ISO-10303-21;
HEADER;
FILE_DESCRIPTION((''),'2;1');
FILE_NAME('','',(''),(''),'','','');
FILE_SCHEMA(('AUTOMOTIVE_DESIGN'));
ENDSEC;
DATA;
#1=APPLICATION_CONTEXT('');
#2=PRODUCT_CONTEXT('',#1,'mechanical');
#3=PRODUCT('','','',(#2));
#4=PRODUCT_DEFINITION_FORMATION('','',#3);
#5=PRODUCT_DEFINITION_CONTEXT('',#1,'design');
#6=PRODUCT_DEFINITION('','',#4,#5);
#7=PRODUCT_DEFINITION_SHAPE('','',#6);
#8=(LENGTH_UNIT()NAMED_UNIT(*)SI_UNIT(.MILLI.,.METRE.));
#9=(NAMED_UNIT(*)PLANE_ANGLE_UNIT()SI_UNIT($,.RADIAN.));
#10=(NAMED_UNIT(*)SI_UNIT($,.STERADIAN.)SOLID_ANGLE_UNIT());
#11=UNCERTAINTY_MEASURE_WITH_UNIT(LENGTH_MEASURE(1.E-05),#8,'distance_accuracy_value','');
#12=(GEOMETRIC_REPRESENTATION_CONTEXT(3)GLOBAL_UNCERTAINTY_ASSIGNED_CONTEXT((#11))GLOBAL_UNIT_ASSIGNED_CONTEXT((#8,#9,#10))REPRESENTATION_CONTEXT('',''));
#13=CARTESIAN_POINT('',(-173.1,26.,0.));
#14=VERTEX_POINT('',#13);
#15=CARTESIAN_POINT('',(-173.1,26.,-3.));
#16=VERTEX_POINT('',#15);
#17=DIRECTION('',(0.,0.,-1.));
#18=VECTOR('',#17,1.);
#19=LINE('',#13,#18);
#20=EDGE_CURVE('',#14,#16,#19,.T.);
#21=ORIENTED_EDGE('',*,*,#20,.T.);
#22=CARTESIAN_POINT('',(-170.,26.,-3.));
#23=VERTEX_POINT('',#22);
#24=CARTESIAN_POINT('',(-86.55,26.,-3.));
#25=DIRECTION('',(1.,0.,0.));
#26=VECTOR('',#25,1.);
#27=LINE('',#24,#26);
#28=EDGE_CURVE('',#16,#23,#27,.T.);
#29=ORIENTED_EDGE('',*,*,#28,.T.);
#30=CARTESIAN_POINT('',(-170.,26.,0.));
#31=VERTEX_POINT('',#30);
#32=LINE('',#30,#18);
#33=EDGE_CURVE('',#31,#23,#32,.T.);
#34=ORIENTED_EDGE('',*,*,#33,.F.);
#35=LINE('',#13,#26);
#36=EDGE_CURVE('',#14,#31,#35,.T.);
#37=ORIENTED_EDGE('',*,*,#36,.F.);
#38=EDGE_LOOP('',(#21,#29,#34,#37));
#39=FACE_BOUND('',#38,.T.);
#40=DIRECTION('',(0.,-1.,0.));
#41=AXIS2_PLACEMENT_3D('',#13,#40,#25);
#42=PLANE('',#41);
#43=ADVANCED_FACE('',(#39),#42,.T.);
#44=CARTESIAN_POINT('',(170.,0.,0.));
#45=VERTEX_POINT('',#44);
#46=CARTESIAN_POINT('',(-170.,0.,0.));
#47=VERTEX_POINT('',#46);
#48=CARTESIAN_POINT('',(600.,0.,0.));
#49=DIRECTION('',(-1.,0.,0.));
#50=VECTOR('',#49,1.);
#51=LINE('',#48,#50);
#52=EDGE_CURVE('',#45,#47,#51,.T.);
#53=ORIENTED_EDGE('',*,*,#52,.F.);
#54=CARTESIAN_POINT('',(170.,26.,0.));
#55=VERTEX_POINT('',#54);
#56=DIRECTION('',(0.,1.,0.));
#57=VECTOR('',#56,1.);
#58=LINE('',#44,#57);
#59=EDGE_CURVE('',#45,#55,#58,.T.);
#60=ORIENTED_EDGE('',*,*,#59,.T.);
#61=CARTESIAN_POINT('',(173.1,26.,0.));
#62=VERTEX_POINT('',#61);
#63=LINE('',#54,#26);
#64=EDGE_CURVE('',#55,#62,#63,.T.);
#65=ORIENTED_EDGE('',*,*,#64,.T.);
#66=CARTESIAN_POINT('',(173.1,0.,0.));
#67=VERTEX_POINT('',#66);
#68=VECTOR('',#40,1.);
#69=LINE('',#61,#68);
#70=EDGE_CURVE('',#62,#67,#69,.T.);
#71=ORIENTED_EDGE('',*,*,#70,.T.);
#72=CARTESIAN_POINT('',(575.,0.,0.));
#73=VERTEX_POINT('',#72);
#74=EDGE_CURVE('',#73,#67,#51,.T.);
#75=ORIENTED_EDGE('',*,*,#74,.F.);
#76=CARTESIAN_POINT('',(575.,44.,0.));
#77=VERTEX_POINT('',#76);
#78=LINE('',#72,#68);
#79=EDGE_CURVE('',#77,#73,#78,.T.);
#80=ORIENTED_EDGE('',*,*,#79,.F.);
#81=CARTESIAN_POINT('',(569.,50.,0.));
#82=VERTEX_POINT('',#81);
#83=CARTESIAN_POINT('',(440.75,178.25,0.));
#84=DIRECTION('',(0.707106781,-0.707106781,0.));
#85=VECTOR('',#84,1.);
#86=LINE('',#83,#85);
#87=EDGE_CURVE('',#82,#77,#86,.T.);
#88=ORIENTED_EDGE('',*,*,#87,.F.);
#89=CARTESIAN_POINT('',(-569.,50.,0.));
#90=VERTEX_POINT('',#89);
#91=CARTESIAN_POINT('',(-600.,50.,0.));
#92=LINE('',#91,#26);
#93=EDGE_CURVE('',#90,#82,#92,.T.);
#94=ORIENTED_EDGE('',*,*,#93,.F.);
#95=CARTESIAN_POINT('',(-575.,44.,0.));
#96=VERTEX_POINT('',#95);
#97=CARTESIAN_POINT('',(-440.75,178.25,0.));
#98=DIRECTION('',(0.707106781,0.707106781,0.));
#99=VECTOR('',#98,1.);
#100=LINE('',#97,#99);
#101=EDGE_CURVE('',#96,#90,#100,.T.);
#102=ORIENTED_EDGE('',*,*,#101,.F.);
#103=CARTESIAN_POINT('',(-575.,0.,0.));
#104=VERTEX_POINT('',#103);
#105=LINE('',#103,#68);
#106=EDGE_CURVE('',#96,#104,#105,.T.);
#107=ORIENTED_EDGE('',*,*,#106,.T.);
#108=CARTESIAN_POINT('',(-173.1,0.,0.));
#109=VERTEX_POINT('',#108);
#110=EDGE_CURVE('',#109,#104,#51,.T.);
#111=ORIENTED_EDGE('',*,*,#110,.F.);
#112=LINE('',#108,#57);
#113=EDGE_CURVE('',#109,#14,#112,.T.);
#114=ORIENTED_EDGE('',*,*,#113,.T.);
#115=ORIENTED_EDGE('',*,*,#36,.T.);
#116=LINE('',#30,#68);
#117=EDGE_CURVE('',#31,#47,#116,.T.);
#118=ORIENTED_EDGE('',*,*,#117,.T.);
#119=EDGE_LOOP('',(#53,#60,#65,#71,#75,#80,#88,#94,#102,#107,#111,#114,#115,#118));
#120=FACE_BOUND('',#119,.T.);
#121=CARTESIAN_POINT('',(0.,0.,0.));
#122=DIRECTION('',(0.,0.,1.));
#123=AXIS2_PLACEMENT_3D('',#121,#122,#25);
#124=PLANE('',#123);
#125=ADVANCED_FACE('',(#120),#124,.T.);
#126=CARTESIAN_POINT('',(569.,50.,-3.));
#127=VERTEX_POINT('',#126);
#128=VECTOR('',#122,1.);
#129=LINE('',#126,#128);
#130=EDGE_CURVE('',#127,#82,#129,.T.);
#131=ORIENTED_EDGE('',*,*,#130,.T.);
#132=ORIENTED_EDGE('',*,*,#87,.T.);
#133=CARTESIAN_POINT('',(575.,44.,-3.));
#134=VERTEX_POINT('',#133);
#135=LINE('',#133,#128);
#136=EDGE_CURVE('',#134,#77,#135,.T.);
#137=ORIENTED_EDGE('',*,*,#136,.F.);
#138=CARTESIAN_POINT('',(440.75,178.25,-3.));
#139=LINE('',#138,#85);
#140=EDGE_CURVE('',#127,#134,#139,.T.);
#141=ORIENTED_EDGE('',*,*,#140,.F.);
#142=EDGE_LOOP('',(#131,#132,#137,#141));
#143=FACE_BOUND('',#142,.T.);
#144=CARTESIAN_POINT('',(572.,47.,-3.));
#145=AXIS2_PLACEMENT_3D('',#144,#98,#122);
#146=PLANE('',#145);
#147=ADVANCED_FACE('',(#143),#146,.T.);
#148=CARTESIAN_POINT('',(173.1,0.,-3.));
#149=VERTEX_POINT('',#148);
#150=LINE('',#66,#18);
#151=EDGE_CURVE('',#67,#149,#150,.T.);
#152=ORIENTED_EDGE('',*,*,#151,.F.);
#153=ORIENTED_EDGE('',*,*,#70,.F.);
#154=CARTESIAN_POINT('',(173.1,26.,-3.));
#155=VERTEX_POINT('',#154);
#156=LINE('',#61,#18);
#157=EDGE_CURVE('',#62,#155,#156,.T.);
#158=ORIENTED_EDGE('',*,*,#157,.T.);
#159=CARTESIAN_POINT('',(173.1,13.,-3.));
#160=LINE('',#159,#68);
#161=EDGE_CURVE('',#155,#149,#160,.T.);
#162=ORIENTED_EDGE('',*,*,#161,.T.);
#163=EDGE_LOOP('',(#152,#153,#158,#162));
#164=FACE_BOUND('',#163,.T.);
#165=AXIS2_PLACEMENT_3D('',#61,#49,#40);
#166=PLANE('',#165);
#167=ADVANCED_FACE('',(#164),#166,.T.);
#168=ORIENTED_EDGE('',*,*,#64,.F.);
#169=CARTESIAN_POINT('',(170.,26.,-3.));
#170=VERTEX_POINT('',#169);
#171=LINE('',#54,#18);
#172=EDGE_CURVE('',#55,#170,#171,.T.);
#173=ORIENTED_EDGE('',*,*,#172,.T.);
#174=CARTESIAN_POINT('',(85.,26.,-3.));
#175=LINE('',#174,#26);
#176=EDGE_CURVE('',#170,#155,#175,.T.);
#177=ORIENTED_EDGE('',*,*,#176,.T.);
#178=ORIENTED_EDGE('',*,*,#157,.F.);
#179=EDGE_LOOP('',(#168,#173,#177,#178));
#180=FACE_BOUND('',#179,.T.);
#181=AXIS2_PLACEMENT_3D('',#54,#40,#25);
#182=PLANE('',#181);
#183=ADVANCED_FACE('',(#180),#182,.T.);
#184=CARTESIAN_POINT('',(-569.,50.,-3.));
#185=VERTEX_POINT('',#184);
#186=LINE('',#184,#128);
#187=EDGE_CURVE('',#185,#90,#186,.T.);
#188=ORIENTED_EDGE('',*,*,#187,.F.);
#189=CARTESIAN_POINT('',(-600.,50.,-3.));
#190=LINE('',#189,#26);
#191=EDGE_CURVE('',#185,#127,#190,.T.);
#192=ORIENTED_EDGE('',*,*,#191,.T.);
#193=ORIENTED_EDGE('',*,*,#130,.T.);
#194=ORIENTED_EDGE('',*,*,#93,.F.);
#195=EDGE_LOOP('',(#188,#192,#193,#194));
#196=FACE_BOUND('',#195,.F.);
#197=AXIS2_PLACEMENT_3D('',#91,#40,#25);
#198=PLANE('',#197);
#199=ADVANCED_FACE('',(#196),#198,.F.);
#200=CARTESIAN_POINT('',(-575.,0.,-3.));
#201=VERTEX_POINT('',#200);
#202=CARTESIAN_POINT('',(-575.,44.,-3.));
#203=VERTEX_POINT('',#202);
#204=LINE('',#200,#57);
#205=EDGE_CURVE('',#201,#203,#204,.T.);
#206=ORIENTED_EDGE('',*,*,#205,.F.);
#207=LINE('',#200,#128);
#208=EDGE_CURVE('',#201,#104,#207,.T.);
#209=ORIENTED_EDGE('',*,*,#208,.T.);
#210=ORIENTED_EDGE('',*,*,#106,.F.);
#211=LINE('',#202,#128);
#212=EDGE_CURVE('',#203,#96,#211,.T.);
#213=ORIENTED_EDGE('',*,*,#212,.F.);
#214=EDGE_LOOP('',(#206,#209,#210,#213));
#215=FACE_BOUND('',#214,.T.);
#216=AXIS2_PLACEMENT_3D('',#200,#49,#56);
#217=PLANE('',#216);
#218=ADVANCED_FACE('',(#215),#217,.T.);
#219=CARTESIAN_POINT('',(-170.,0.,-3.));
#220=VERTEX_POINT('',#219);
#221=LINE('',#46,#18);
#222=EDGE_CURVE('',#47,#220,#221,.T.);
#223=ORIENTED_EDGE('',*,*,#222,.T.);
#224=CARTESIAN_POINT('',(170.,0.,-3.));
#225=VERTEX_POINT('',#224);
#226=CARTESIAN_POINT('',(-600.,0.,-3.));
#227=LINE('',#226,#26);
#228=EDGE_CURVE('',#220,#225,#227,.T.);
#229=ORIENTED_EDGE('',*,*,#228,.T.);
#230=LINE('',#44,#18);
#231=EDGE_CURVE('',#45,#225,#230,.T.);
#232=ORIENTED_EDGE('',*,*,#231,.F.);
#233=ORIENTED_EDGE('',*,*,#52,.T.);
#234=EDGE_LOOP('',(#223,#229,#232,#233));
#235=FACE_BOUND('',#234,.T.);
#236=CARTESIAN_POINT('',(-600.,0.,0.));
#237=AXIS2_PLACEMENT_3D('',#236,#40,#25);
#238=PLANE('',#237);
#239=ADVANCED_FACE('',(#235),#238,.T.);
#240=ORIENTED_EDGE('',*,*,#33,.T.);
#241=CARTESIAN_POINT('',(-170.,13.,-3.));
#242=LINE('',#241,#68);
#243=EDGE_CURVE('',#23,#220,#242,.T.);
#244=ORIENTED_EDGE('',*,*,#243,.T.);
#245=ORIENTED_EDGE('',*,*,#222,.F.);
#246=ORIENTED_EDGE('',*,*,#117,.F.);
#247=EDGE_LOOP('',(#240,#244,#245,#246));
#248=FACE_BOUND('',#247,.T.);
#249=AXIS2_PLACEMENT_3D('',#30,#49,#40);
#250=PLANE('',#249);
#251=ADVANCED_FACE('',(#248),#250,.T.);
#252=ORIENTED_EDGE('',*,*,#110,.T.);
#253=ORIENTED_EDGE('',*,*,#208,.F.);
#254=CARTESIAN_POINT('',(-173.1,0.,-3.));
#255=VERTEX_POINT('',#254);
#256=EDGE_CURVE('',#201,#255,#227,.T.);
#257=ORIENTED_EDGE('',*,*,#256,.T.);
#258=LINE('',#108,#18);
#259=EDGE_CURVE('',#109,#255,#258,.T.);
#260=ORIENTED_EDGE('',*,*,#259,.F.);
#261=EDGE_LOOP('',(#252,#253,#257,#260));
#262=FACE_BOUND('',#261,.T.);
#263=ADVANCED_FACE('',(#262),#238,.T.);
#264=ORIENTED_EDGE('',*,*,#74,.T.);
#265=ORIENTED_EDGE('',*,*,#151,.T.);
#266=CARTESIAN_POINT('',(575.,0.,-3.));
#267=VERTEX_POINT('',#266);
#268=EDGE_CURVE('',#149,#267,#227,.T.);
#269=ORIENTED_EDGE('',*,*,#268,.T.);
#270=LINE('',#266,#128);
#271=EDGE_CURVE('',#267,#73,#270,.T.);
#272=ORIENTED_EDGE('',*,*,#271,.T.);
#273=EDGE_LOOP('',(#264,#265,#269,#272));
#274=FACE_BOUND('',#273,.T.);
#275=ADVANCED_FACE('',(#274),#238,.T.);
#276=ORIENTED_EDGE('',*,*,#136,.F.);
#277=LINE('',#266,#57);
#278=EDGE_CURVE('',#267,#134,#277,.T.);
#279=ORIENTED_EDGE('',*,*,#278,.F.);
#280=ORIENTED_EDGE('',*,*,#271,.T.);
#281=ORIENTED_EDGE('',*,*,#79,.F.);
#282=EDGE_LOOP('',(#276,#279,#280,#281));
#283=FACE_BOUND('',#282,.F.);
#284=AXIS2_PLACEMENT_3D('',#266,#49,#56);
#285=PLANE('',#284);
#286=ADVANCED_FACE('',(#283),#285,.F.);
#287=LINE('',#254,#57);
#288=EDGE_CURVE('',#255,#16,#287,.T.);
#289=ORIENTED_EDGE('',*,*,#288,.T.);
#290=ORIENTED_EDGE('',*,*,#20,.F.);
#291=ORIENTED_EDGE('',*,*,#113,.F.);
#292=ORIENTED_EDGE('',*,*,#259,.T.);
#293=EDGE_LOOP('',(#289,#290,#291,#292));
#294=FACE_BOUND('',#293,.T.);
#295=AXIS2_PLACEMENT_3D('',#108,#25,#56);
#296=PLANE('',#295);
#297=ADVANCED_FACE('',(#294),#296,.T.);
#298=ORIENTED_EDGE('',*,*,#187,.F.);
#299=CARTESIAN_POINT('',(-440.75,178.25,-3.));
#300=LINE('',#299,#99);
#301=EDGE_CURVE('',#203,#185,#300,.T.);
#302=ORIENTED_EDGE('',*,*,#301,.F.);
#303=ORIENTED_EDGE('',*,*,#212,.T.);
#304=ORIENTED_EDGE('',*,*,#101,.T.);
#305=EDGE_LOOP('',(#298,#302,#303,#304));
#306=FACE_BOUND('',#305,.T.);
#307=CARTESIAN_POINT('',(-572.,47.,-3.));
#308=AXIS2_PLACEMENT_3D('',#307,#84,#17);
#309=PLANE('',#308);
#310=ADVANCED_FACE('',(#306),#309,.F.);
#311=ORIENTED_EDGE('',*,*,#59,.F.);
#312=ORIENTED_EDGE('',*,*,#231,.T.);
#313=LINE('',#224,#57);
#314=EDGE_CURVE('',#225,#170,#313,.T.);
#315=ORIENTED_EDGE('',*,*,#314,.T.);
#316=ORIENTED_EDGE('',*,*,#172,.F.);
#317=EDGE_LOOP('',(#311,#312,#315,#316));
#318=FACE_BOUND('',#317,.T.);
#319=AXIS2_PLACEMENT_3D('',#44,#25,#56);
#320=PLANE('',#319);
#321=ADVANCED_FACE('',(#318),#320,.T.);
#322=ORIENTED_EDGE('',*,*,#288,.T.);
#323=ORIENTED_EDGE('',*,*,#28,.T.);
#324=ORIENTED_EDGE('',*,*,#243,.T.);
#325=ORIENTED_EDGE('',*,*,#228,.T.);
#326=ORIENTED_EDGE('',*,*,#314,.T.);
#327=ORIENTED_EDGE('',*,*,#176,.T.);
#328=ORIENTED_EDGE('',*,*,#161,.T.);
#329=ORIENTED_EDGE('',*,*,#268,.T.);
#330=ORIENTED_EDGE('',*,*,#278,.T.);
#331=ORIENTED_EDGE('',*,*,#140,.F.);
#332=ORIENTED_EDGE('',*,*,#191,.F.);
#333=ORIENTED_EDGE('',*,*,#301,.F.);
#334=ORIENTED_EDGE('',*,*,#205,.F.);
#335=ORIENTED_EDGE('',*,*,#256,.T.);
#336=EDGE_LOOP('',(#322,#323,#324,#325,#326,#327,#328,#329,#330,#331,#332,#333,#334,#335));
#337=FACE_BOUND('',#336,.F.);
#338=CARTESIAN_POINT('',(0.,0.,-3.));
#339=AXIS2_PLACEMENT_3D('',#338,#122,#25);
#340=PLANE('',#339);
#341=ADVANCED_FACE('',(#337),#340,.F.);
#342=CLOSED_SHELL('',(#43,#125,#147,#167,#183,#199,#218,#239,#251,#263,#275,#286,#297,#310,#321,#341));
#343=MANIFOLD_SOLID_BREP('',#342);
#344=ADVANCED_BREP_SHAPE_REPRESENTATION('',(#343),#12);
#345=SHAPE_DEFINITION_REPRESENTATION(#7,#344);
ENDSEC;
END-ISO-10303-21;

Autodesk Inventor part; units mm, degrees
ref_plane "YZ Plane" through (0, 0, 0) normal (1, 0, 0) x (0, 1, 0)
ref_plane "XZ Plane" through (0, 0, 0) normal (0, 1, 0) x (-1, 0, 0)
ref_plane "XY Plane" through (0, 0, 0) normal (0, 0, 1) x (1, 0, 0)
sketch "Sketch1" plane through (0, 0, 0) normal (0, 0, 1) x (1, 0, 0)
  line L0 (-600, 0) -> (600, 0)
  line L1 (-600, 0) -> (-600, 50)
  line L2 (-600, 50) -> (600, 50)
  line L3 (600, 50) -> (600, 0)
  circle A0 centre (-600, 0) radius 25
  circle A1 centre (600, 0) radius 25
  line L4 (600, 0) -> (644.2345, 16.1001)
  line L5 (644.2345, 16.1001) -> (635, 50)
  line L6 (635, 50) -> (600, 50)
  point P0 (0, 0)
  point P1 (0, 0)
  point P2 (-600, 25)
  point P3 (-575, 0)
  point P4 (575, 0)
  point P5 (600, 25)
  point P6 (623.4923, 8.5505)
  dimension "d18" = 50
  dimension "d19" = 1200
  dimension "d25" = 50
  dimension "d26" = 50
  dimension "d39" = 70
  dimension "d40" = 35
extrude "Plate2" add sketch "Sketch1" against normal blind 3 contours L1 A0 L0 | A0 L1 L2 L3 A1 L0 | A1 L3 L0 picked at (-598.1457, 16.4577)
sketch "Sketch3" plane through (0, 0, 0) normal (0, 0, 1) x (1, 0, 0)
  line L0 (-171.55, 0) -> (-171.55, 50) construction
  line L1 (600, 50) -> (-600, 50) construction
  line L2 (-600, 50) -> (-600, 0) projected
  line L3 (-173.1, 26) -> (-170, 26)
  line L4 (-170, 26) -> (-170, 0)
  line L5 (-170, 0) -> (-173.1, 0)
  line L6 (-173.1, 0) -> (-173.1, 26)
  line L7 (-600, 0) -> (600, 0) projected
  line L8 (171.55, 50) -> (171.55, 0) construction
  line L9 (170, 26) -> (173.1, 26)
  line L10 (173.1, 26) -> (173.1, 0)
  line L11 (173.1, 0) -> (170, 0)
  line L12 (170, 0) -> (170, 26)
  line L13 (0, 0) -> (0, 50) construction
  point P0 (0, 0)
  point P1 (170, 0)
  point P2 (173.1, 0)
  dimension "d28" = 3.1
  dimension "d29" = 26
  dimension "d52" = 340
extrude "Extrusion2" cut sketch "Sketch3" against normal through all
sketch "Sketch4" plane through (0, 0, -3) normal (0, 0, -1) x (-1, 0, 0)
  line L0 (170, 0) -> (170, 26) projected
  line L1 (170, 26) -> (173.1, 26) projected
  line L2 (173.1, 26) -> (173.1, 0) projected
  line L3 (600, 0) -> (173.1, 0) projected
  line L4 (600, 50) -> (600, 0) projected
  line L5 (-600, 50) -> (600, 50) projected
  line L6 (-600, 0) -> (-600, 50) projected
  line L7 (-173.1, 0) -> (-600, 0) projected
  line L8 (-173.1, 0) -> (-173.1, 26) projected
  line L9 (-173.1, 26) -> (-170, 26) projected
  line L10 (-170, 26) -> (-170, 0) projected
  line L11 (170, 0) -> (-170, 0) projected
  line L12 (-575, 0) -> (-575, 50)
  line L13 (-600, 50) -> (600, 50) projected
  line L14 (600, 0) -> (173.1, 0) projected
  line L15 (575, 0) -> (575, 50)
  point P0 (0, 0)
  point P1 (-575, 50)
  point P2 (575, 0)
  dimension "d45" = 25
  dimension "d46" = 25
extrude "Extrusion3" cut sketch "Sketch4" against normal through all contours L15 L5 L4 L3 | L7 L6 L5 L12
sketch "Sketch5" plane through (0, 0, 0) normal (0, 0, 1) x (1, 0, 0)
  line L0 (-55.7541, 0.5014) -> (-55.7541, 31.0924) construction
  line L1 (-55.7541, 31.0924) -> (99.4942, 31.0924) construction
  line L2 (99.4942, 31.0924) -> (99.4942, 0.5014) construction
  line L3 (99.4942, 0.5014) -> (-55.7541, 0.5014) construction
  line L4 (575, 50) -> (-575, 50) projected
  line L5 (-575, 50) -> (-575, 0) projected
  point P0 (0, 0)
mark "Mark1"
chamfer "Corner Chamfer1" distance 6 angle 45 2 edges at (-575, 50, -1.5) (575, 50, -1.5)
equation "\"d46\" = d45"
equation "\"d20\" = Thickness"
equation "\"BendReliefWidth\" = Thickness"
equation "\"BendReliefDepth\" = 0.5 * Thickness"
equation "\"CornerReliefSize\" = 4 * Thickness"
equation "\"MinimumRemnant\" = 2 * Thickness"
equation "\"TransitionRadius\" = BendRadius"
equation "\"JacobiRadiusSize\" = BendRadius"
equation "\"GapSize\" = Thickness"
equation "\"Thickness\" = 3"
equation "\"BendRadius\" = 5"
properties part number "MSC 106 RIB CONE" material "Stainless Steel"
